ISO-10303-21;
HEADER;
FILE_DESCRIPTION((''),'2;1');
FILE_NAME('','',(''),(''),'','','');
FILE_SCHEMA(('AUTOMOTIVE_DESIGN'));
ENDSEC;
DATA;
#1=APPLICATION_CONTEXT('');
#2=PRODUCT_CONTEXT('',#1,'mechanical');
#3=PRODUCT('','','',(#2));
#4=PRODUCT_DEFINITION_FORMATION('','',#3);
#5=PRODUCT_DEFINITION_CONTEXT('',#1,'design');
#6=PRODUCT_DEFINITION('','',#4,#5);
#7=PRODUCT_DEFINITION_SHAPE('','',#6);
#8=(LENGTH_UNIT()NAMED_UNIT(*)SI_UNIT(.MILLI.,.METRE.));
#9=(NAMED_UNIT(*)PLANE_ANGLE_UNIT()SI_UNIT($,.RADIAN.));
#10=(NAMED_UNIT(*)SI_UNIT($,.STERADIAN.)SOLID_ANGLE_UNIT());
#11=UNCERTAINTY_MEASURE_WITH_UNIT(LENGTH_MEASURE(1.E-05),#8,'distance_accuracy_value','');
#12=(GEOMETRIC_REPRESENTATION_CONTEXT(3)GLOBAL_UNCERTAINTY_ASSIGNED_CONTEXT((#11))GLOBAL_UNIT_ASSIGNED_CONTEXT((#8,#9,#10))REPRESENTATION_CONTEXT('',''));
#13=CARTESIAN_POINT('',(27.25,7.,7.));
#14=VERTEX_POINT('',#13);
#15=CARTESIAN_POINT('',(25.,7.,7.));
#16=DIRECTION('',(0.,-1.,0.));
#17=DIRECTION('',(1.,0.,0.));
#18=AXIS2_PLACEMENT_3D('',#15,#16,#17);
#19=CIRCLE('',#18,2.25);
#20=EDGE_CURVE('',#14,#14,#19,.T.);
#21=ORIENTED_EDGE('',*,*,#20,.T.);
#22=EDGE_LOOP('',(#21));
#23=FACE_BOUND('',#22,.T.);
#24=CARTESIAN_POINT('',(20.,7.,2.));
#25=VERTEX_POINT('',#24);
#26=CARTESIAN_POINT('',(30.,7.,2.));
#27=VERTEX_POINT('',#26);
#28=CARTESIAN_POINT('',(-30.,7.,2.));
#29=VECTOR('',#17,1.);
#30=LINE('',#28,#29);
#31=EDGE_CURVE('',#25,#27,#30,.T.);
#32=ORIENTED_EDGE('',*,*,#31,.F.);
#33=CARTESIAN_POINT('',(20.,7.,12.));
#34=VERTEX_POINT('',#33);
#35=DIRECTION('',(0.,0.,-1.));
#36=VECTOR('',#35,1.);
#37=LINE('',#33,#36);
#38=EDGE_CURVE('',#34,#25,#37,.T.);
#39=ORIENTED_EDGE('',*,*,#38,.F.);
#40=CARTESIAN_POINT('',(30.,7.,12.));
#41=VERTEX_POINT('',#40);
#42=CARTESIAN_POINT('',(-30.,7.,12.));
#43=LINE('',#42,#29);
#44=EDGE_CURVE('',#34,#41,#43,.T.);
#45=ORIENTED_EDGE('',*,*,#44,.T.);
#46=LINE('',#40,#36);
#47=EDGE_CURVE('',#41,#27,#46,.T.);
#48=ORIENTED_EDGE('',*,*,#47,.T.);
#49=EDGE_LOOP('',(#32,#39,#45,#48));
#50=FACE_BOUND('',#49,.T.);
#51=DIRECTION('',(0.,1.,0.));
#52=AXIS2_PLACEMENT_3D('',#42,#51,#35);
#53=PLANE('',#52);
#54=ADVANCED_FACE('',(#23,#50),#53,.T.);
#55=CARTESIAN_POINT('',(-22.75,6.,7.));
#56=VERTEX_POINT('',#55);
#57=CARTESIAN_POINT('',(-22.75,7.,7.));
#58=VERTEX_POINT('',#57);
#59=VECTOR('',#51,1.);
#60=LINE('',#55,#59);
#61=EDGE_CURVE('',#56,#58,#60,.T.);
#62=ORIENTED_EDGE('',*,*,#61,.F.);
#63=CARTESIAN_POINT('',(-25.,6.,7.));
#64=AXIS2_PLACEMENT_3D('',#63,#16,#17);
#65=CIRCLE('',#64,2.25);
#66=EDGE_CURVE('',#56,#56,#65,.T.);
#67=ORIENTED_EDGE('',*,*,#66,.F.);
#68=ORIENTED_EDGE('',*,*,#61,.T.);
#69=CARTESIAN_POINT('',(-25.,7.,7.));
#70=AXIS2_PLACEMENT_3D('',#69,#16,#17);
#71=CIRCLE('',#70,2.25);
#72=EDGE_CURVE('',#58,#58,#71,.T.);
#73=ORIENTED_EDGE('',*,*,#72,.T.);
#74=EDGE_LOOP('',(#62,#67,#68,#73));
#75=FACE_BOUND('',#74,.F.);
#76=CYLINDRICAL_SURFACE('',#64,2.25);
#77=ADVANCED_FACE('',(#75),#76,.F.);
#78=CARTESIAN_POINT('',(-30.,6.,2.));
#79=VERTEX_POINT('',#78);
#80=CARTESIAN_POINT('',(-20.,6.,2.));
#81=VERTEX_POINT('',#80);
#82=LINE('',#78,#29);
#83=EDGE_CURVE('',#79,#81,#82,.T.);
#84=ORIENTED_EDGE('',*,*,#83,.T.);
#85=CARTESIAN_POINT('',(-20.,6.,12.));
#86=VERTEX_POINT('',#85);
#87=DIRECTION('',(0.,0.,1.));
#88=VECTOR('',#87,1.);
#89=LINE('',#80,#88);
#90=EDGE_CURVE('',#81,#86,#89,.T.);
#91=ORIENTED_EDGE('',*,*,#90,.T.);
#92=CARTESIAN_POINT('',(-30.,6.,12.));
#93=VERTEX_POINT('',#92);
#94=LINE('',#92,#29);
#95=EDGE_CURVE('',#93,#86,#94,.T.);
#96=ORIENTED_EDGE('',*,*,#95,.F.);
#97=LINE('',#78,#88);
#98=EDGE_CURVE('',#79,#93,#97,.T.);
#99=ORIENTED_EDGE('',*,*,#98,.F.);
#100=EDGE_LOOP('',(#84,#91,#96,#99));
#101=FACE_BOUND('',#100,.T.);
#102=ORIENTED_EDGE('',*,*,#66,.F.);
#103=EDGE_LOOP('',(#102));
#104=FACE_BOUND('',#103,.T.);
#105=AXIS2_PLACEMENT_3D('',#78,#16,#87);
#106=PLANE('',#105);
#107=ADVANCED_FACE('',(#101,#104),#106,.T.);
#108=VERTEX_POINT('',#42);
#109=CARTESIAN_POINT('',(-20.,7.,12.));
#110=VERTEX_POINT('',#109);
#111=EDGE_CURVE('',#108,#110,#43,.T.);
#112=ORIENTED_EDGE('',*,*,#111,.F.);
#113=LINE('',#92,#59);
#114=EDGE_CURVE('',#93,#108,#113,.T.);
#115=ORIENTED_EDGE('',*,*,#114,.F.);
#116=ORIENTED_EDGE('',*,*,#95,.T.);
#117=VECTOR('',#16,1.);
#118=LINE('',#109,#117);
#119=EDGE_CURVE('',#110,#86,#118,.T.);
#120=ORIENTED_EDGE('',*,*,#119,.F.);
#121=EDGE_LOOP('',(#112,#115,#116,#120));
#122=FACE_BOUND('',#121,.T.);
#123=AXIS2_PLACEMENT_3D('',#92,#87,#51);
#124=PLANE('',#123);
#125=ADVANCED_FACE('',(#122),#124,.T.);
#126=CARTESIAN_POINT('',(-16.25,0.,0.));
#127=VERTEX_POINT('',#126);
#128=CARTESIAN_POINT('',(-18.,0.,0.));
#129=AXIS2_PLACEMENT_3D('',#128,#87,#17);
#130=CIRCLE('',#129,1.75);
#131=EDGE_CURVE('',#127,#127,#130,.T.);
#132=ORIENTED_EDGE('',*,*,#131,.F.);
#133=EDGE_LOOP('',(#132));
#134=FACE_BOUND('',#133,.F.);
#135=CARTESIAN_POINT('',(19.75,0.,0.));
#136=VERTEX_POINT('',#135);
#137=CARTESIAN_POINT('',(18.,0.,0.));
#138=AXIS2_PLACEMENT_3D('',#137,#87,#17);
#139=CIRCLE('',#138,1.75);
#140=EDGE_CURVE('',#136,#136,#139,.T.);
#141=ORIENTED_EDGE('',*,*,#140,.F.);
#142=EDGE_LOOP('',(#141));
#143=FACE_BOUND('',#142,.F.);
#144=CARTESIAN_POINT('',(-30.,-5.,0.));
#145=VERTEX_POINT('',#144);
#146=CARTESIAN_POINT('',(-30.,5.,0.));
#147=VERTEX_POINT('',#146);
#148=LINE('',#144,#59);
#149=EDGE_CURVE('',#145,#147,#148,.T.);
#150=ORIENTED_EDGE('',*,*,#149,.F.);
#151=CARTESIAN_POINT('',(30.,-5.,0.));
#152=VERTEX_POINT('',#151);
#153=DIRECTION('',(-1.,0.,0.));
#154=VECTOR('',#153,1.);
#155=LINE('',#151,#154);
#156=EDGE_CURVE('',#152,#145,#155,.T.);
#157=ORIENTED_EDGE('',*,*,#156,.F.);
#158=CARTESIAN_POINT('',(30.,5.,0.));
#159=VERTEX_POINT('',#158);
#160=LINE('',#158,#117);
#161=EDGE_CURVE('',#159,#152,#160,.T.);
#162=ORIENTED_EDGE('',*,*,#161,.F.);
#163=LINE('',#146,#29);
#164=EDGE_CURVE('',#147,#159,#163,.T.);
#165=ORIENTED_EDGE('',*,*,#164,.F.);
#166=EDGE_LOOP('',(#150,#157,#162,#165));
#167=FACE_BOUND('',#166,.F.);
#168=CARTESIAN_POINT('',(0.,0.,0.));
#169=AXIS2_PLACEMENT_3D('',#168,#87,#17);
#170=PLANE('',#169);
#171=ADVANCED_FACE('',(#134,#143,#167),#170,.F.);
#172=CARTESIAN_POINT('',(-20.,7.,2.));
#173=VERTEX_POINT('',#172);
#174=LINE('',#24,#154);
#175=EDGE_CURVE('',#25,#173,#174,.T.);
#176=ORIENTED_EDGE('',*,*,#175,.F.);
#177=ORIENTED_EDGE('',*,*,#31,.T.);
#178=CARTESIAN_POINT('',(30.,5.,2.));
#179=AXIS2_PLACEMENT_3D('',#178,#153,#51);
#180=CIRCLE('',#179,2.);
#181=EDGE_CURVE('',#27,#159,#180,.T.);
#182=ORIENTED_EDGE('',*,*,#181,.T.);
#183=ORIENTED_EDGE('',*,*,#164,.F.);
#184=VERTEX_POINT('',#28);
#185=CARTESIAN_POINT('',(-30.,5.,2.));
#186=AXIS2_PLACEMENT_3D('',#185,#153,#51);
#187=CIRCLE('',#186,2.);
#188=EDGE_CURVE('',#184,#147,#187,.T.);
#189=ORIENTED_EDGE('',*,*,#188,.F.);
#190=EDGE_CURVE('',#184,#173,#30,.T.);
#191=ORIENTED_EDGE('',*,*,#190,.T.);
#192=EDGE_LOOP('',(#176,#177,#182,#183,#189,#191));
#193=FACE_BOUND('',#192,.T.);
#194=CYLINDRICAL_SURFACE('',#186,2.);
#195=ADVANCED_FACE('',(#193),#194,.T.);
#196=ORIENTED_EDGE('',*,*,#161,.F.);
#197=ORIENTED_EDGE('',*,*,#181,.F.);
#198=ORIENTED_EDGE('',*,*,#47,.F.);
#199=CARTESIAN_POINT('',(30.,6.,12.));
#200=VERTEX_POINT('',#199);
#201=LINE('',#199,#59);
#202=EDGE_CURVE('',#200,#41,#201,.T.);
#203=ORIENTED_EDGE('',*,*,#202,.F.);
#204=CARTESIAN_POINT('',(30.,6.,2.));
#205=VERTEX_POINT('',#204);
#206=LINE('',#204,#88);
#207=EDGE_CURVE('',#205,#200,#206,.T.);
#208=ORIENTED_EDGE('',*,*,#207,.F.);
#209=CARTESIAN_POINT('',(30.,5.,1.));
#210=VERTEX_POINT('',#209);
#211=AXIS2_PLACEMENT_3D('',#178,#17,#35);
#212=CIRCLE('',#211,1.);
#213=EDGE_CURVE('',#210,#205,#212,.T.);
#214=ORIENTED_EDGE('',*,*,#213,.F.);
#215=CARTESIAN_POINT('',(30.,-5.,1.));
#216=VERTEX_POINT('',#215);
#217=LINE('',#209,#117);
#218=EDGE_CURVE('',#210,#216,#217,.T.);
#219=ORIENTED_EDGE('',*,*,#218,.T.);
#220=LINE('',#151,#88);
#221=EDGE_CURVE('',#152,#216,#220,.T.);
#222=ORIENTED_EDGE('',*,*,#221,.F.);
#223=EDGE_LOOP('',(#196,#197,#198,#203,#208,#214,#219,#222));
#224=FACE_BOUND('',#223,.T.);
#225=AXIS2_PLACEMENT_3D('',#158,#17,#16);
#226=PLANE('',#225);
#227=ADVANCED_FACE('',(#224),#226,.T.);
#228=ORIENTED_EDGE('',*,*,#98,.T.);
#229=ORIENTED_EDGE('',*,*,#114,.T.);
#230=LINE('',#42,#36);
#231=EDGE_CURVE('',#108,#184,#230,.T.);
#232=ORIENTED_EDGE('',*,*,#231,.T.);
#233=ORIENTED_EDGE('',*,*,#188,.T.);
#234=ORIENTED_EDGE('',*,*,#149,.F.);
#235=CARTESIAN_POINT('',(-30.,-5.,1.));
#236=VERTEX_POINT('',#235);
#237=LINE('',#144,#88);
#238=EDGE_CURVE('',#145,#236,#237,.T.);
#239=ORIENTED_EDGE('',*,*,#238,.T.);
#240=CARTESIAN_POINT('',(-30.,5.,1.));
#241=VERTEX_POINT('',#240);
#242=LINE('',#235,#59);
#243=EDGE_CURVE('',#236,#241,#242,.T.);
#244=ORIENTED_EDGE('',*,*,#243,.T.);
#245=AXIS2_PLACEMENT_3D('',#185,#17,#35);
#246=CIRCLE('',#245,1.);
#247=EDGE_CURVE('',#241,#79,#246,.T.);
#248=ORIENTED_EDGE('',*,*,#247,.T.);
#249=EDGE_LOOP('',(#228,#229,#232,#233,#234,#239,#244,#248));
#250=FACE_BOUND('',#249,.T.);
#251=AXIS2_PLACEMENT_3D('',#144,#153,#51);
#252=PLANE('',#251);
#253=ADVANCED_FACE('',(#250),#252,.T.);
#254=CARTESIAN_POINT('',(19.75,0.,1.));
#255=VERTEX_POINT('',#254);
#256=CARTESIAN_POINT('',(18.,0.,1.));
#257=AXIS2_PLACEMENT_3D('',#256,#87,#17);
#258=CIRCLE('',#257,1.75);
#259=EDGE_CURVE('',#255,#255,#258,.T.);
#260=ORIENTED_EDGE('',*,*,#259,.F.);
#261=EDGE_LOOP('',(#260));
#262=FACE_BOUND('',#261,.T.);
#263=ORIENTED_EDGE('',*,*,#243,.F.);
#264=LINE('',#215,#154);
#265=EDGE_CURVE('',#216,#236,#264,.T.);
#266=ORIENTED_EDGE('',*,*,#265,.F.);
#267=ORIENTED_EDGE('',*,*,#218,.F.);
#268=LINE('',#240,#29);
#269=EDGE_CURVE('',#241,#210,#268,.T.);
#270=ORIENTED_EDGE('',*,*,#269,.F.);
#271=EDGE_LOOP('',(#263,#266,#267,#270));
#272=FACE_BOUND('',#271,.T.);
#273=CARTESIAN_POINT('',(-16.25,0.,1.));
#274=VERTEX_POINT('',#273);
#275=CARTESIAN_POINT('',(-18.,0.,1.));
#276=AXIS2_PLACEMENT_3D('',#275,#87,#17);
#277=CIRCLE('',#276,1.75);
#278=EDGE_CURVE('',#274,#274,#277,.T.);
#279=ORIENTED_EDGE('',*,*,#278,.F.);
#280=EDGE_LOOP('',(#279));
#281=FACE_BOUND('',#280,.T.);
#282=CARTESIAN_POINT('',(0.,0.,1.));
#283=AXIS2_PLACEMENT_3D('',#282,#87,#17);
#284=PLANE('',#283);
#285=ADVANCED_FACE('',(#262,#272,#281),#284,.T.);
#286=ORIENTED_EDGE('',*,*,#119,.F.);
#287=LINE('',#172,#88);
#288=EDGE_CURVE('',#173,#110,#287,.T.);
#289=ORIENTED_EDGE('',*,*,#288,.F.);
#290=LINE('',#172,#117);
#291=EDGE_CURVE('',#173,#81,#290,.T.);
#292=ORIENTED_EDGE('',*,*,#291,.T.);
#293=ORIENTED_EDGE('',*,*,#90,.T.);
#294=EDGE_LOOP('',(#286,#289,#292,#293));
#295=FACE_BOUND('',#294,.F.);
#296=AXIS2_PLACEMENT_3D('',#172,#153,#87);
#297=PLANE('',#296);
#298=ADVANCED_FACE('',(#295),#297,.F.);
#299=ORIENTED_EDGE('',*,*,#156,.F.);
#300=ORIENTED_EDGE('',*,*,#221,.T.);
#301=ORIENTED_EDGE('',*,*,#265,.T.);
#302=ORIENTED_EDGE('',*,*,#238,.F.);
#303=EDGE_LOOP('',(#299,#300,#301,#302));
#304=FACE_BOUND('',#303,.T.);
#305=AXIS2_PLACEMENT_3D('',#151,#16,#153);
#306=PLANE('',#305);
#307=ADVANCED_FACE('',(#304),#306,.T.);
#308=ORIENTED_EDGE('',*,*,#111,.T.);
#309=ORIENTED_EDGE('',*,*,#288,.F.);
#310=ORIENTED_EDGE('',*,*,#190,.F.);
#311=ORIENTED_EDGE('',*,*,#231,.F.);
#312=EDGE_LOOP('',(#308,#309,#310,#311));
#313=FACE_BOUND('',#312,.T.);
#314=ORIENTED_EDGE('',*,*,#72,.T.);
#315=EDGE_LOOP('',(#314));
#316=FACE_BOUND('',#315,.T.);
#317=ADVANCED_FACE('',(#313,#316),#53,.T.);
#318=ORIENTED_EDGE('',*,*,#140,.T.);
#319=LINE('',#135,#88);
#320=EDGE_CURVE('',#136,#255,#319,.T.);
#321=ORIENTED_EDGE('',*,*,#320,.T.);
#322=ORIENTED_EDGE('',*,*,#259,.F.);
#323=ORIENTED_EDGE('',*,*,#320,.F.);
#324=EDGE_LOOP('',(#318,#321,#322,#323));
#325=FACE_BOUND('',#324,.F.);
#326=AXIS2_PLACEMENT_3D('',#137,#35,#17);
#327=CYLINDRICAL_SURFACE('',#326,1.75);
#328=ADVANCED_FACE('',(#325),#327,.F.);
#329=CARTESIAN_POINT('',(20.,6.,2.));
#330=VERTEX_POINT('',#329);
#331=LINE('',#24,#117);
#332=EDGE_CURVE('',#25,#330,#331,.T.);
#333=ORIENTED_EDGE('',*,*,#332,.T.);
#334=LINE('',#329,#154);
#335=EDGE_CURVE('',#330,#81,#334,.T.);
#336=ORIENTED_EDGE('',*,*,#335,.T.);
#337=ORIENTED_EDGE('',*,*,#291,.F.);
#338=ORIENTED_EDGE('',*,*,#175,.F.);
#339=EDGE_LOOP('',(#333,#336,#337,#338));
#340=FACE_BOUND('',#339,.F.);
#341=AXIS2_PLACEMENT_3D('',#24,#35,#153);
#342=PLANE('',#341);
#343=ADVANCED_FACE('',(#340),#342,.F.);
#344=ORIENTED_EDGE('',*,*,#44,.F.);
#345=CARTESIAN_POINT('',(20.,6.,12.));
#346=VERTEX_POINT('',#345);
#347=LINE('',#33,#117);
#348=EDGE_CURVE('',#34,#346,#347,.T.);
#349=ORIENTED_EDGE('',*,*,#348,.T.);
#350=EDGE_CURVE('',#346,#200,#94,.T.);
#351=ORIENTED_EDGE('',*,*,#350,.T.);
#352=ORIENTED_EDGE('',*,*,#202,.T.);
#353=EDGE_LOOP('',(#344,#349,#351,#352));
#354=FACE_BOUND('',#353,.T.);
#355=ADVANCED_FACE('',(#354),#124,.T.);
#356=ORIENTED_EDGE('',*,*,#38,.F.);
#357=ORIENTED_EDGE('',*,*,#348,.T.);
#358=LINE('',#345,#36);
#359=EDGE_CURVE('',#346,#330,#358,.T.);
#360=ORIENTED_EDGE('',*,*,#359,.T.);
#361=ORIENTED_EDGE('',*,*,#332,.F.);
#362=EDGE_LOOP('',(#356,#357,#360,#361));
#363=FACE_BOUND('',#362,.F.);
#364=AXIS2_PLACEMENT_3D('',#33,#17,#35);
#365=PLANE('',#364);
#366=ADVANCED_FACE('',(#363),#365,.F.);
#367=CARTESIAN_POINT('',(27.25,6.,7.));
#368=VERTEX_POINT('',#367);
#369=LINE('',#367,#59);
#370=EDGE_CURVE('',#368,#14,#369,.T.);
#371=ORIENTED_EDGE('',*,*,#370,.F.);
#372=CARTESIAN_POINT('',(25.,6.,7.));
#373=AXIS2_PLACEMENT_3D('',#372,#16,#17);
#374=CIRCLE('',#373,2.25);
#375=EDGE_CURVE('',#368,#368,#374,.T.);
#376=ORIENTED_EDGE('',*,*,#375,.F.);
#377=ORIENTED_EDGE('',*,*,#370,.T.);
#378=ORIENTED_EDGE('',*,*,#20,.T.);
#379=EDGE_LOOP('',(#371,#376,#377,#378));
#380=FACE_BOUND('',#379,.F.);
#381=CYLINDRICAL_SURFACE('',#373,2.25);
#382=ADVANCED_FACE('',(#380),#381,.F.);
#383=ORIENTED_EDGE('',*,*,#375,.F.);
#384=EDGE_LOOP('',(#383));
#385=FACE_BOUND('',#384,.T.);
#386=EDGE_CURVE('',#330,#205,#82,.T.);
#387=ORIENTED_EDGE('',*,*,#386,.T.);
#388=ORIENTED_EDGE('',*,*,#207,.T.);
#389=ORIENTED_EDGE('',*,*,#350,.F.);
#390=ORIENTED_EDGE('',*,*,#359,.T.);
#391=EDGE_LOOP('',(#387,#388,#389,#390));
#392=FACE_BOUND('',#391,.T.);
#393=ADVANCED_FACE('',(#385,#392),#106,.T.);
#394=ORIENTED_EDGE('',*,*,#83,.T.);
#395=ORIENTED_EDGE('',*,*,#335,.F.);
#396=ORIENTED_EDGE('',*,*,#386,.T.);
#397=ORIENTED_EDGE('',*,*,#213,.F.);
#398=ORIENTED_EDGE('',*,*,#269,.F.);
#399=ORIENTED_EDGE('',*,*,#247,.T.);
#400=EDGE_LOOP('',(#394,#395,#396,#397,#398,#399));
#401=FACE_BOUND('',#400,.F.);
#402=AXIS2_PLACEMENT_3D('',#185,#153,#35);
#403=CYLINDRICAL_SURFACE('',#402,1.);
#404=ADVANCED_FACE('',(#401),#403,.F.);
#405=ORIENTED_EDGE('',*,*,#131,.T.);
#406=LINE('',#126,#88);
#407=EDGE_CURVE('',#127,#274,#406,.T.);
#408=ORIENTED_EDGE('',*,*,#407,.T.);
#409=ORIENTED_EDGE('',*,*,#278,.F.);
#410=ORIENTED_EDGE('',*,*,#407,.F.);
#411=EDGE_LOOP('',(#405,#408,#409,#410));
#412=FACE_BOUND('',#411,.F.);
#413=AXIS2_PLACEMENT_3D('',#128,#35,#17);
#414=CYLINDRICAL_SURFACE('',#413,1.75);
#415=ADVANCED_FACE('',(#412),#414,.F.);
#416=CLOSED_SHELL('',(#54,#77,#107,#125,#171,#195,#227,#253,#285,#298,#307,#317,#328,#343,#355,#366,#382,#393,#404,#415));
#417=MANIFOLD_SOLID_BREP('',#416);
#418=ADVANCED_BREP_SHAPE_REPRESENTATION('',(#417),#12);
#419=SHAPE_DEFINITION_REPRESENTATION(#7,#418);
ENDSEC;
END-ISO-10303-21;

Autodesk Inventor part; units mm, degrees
ref_plane "YZ Plane" through (0, 0, 0) normal (1, 0, 0) x (0, 1, 0)
ref_plane "XZ Plane" through (0, 0, 0) normal (0, 1, 0) x (-1, 0, 0)
ref_plane "XY Plane" through (0, 0, 0) normal (0, 0, 1) x (1, 0, 0)
sketch "Sketch1" plane through (0, 0, 0) normal (0, 0, 1) x (1, 0, 0)
  line L0 (-30, 5) -> (30, 5)
  line L1 (30, 5) -> (30, -5)
  line L2 (30, -5) -> (-30, -5)
  line L3 (-30, -5) -> (-30, 5)
  line L4 (-30, 5) -> (30, -5) construction
  line L5 (30, 5) -> (-30, -5) construction
  circle A0 centre (-18, 0) radius 1.75
  line L6 (0, 0) -> (0, -5.5046) construction
  circle A1 centre (18, 0) radius 1.75
  dimension "d0" = 60
  dimension "d1" = 10
  dimension "d2" = 3.5
  dimension "d3" = 36
  dimension "d4" = 5
extrude "Plate1" add sketch "Sketch1" along normal blind 1
sketch "Sketch2" plane through (-30, 6, 2) normal (0, 1, 0) x (-1, 0, 0)
  line L0 (-60, 0) -> (0, 0)
  line L1 (0, 0) -> (0, 10)
  line L2 (0, 10) -> (-60, 10)
  line L3 (-60, 10) -> (-60, 0)
edge flange "Flange1" height 12 angle 90 thickness 1 bend radius 1 thickness toward (0, 1, 0) relief tear relief width 1 relief depth 0.5 edges at (0, 5, 1) wall of the first edge with corners at (30, 6, 2) (-30, 6, 2) (-30, 6, 12) (30, 6, 12)
bend "Bend1"
corner "Corner1"
sketch "Sketch3" plane through (-30, 6, 12) normal (0, -1, 0) x (1, 0, 0)
  circle A0 centre (55, -5) radius 2.25
  circle A1 centre (5, -5) radius 2.25
  line L0 (30, -12) -> (30, 5.1941) construction
  line L1 (60, -11) -> (0, -11) construction
  dimension "d20" = 4.5
  dimension "d21" = 4.5
  dimension "d22" = 50
  dimension "d23" = 6
extrude "Cut1" cut sketch "Sketch3" against normal blind 1
sketch "Sketch4" plane through (-30, 7, 12) normal (0, 1, 0) x (1, 0, 0)
  line L0 (60, 0) -> (0, 0) projected
  line L1 (50, 10) -> (10, 10)
  line L2 (10, 10) -> (10, 0)
  line L3 (10, 0) -> (50, 0)
  line L4 (50, 0) -> (50, 10)
  line L5 (50, 10) -> (10, 0) construction
  line L6 (10, 10) -> (50, 0) construction
  line L7 (60, 10) -> (0, 10) projected
  point P0 (30, 12)
  point P1 (30, 5)
  dimension "d26" = 40
extrude "Cut2" cut sketch "Sketch4" against normal blind 1
equation "\"d20\" = d21"
equation "\"d24\" = 厚度"
equation "\"d27\" = 厚度"
equation "\"d9\" = 厚度"
equation "\"d10\" = 折彎離隙寬度"
equation "\"d11\" = 折彎離隙深度"
equation "\"d12\" = 最小剩餘"
equation "\"d13\" = 轉移半徑"
equation "\"d16\" = 折彎半徑"
equation "\"d17\" = 轉角離隙大小"
equation "\"d18\" = 間隙大小"
equation "\"d19\" = Jacobi半徑大小"
equation "\"折彎半徑\" = 厚度"
equation "\"折彎離隙寬度\" = 厚度"
equation "\"折彎離隙深度\" = 0.5 * 厚度"
equation "\"轉角離隙大小\" = 4 * 厚度"
equation "\"最小剩餘\" = 2 * 厚度"
equation "\"轉移半徑\" = 折彎半徑"
equation "\"Jacobi半徑大小\" = 折彎半徑"
equation "\"間隙大小\" = 厚度"
equation "\"厚度\" = 1"
properties part number "fan_fix_plate_connect"
